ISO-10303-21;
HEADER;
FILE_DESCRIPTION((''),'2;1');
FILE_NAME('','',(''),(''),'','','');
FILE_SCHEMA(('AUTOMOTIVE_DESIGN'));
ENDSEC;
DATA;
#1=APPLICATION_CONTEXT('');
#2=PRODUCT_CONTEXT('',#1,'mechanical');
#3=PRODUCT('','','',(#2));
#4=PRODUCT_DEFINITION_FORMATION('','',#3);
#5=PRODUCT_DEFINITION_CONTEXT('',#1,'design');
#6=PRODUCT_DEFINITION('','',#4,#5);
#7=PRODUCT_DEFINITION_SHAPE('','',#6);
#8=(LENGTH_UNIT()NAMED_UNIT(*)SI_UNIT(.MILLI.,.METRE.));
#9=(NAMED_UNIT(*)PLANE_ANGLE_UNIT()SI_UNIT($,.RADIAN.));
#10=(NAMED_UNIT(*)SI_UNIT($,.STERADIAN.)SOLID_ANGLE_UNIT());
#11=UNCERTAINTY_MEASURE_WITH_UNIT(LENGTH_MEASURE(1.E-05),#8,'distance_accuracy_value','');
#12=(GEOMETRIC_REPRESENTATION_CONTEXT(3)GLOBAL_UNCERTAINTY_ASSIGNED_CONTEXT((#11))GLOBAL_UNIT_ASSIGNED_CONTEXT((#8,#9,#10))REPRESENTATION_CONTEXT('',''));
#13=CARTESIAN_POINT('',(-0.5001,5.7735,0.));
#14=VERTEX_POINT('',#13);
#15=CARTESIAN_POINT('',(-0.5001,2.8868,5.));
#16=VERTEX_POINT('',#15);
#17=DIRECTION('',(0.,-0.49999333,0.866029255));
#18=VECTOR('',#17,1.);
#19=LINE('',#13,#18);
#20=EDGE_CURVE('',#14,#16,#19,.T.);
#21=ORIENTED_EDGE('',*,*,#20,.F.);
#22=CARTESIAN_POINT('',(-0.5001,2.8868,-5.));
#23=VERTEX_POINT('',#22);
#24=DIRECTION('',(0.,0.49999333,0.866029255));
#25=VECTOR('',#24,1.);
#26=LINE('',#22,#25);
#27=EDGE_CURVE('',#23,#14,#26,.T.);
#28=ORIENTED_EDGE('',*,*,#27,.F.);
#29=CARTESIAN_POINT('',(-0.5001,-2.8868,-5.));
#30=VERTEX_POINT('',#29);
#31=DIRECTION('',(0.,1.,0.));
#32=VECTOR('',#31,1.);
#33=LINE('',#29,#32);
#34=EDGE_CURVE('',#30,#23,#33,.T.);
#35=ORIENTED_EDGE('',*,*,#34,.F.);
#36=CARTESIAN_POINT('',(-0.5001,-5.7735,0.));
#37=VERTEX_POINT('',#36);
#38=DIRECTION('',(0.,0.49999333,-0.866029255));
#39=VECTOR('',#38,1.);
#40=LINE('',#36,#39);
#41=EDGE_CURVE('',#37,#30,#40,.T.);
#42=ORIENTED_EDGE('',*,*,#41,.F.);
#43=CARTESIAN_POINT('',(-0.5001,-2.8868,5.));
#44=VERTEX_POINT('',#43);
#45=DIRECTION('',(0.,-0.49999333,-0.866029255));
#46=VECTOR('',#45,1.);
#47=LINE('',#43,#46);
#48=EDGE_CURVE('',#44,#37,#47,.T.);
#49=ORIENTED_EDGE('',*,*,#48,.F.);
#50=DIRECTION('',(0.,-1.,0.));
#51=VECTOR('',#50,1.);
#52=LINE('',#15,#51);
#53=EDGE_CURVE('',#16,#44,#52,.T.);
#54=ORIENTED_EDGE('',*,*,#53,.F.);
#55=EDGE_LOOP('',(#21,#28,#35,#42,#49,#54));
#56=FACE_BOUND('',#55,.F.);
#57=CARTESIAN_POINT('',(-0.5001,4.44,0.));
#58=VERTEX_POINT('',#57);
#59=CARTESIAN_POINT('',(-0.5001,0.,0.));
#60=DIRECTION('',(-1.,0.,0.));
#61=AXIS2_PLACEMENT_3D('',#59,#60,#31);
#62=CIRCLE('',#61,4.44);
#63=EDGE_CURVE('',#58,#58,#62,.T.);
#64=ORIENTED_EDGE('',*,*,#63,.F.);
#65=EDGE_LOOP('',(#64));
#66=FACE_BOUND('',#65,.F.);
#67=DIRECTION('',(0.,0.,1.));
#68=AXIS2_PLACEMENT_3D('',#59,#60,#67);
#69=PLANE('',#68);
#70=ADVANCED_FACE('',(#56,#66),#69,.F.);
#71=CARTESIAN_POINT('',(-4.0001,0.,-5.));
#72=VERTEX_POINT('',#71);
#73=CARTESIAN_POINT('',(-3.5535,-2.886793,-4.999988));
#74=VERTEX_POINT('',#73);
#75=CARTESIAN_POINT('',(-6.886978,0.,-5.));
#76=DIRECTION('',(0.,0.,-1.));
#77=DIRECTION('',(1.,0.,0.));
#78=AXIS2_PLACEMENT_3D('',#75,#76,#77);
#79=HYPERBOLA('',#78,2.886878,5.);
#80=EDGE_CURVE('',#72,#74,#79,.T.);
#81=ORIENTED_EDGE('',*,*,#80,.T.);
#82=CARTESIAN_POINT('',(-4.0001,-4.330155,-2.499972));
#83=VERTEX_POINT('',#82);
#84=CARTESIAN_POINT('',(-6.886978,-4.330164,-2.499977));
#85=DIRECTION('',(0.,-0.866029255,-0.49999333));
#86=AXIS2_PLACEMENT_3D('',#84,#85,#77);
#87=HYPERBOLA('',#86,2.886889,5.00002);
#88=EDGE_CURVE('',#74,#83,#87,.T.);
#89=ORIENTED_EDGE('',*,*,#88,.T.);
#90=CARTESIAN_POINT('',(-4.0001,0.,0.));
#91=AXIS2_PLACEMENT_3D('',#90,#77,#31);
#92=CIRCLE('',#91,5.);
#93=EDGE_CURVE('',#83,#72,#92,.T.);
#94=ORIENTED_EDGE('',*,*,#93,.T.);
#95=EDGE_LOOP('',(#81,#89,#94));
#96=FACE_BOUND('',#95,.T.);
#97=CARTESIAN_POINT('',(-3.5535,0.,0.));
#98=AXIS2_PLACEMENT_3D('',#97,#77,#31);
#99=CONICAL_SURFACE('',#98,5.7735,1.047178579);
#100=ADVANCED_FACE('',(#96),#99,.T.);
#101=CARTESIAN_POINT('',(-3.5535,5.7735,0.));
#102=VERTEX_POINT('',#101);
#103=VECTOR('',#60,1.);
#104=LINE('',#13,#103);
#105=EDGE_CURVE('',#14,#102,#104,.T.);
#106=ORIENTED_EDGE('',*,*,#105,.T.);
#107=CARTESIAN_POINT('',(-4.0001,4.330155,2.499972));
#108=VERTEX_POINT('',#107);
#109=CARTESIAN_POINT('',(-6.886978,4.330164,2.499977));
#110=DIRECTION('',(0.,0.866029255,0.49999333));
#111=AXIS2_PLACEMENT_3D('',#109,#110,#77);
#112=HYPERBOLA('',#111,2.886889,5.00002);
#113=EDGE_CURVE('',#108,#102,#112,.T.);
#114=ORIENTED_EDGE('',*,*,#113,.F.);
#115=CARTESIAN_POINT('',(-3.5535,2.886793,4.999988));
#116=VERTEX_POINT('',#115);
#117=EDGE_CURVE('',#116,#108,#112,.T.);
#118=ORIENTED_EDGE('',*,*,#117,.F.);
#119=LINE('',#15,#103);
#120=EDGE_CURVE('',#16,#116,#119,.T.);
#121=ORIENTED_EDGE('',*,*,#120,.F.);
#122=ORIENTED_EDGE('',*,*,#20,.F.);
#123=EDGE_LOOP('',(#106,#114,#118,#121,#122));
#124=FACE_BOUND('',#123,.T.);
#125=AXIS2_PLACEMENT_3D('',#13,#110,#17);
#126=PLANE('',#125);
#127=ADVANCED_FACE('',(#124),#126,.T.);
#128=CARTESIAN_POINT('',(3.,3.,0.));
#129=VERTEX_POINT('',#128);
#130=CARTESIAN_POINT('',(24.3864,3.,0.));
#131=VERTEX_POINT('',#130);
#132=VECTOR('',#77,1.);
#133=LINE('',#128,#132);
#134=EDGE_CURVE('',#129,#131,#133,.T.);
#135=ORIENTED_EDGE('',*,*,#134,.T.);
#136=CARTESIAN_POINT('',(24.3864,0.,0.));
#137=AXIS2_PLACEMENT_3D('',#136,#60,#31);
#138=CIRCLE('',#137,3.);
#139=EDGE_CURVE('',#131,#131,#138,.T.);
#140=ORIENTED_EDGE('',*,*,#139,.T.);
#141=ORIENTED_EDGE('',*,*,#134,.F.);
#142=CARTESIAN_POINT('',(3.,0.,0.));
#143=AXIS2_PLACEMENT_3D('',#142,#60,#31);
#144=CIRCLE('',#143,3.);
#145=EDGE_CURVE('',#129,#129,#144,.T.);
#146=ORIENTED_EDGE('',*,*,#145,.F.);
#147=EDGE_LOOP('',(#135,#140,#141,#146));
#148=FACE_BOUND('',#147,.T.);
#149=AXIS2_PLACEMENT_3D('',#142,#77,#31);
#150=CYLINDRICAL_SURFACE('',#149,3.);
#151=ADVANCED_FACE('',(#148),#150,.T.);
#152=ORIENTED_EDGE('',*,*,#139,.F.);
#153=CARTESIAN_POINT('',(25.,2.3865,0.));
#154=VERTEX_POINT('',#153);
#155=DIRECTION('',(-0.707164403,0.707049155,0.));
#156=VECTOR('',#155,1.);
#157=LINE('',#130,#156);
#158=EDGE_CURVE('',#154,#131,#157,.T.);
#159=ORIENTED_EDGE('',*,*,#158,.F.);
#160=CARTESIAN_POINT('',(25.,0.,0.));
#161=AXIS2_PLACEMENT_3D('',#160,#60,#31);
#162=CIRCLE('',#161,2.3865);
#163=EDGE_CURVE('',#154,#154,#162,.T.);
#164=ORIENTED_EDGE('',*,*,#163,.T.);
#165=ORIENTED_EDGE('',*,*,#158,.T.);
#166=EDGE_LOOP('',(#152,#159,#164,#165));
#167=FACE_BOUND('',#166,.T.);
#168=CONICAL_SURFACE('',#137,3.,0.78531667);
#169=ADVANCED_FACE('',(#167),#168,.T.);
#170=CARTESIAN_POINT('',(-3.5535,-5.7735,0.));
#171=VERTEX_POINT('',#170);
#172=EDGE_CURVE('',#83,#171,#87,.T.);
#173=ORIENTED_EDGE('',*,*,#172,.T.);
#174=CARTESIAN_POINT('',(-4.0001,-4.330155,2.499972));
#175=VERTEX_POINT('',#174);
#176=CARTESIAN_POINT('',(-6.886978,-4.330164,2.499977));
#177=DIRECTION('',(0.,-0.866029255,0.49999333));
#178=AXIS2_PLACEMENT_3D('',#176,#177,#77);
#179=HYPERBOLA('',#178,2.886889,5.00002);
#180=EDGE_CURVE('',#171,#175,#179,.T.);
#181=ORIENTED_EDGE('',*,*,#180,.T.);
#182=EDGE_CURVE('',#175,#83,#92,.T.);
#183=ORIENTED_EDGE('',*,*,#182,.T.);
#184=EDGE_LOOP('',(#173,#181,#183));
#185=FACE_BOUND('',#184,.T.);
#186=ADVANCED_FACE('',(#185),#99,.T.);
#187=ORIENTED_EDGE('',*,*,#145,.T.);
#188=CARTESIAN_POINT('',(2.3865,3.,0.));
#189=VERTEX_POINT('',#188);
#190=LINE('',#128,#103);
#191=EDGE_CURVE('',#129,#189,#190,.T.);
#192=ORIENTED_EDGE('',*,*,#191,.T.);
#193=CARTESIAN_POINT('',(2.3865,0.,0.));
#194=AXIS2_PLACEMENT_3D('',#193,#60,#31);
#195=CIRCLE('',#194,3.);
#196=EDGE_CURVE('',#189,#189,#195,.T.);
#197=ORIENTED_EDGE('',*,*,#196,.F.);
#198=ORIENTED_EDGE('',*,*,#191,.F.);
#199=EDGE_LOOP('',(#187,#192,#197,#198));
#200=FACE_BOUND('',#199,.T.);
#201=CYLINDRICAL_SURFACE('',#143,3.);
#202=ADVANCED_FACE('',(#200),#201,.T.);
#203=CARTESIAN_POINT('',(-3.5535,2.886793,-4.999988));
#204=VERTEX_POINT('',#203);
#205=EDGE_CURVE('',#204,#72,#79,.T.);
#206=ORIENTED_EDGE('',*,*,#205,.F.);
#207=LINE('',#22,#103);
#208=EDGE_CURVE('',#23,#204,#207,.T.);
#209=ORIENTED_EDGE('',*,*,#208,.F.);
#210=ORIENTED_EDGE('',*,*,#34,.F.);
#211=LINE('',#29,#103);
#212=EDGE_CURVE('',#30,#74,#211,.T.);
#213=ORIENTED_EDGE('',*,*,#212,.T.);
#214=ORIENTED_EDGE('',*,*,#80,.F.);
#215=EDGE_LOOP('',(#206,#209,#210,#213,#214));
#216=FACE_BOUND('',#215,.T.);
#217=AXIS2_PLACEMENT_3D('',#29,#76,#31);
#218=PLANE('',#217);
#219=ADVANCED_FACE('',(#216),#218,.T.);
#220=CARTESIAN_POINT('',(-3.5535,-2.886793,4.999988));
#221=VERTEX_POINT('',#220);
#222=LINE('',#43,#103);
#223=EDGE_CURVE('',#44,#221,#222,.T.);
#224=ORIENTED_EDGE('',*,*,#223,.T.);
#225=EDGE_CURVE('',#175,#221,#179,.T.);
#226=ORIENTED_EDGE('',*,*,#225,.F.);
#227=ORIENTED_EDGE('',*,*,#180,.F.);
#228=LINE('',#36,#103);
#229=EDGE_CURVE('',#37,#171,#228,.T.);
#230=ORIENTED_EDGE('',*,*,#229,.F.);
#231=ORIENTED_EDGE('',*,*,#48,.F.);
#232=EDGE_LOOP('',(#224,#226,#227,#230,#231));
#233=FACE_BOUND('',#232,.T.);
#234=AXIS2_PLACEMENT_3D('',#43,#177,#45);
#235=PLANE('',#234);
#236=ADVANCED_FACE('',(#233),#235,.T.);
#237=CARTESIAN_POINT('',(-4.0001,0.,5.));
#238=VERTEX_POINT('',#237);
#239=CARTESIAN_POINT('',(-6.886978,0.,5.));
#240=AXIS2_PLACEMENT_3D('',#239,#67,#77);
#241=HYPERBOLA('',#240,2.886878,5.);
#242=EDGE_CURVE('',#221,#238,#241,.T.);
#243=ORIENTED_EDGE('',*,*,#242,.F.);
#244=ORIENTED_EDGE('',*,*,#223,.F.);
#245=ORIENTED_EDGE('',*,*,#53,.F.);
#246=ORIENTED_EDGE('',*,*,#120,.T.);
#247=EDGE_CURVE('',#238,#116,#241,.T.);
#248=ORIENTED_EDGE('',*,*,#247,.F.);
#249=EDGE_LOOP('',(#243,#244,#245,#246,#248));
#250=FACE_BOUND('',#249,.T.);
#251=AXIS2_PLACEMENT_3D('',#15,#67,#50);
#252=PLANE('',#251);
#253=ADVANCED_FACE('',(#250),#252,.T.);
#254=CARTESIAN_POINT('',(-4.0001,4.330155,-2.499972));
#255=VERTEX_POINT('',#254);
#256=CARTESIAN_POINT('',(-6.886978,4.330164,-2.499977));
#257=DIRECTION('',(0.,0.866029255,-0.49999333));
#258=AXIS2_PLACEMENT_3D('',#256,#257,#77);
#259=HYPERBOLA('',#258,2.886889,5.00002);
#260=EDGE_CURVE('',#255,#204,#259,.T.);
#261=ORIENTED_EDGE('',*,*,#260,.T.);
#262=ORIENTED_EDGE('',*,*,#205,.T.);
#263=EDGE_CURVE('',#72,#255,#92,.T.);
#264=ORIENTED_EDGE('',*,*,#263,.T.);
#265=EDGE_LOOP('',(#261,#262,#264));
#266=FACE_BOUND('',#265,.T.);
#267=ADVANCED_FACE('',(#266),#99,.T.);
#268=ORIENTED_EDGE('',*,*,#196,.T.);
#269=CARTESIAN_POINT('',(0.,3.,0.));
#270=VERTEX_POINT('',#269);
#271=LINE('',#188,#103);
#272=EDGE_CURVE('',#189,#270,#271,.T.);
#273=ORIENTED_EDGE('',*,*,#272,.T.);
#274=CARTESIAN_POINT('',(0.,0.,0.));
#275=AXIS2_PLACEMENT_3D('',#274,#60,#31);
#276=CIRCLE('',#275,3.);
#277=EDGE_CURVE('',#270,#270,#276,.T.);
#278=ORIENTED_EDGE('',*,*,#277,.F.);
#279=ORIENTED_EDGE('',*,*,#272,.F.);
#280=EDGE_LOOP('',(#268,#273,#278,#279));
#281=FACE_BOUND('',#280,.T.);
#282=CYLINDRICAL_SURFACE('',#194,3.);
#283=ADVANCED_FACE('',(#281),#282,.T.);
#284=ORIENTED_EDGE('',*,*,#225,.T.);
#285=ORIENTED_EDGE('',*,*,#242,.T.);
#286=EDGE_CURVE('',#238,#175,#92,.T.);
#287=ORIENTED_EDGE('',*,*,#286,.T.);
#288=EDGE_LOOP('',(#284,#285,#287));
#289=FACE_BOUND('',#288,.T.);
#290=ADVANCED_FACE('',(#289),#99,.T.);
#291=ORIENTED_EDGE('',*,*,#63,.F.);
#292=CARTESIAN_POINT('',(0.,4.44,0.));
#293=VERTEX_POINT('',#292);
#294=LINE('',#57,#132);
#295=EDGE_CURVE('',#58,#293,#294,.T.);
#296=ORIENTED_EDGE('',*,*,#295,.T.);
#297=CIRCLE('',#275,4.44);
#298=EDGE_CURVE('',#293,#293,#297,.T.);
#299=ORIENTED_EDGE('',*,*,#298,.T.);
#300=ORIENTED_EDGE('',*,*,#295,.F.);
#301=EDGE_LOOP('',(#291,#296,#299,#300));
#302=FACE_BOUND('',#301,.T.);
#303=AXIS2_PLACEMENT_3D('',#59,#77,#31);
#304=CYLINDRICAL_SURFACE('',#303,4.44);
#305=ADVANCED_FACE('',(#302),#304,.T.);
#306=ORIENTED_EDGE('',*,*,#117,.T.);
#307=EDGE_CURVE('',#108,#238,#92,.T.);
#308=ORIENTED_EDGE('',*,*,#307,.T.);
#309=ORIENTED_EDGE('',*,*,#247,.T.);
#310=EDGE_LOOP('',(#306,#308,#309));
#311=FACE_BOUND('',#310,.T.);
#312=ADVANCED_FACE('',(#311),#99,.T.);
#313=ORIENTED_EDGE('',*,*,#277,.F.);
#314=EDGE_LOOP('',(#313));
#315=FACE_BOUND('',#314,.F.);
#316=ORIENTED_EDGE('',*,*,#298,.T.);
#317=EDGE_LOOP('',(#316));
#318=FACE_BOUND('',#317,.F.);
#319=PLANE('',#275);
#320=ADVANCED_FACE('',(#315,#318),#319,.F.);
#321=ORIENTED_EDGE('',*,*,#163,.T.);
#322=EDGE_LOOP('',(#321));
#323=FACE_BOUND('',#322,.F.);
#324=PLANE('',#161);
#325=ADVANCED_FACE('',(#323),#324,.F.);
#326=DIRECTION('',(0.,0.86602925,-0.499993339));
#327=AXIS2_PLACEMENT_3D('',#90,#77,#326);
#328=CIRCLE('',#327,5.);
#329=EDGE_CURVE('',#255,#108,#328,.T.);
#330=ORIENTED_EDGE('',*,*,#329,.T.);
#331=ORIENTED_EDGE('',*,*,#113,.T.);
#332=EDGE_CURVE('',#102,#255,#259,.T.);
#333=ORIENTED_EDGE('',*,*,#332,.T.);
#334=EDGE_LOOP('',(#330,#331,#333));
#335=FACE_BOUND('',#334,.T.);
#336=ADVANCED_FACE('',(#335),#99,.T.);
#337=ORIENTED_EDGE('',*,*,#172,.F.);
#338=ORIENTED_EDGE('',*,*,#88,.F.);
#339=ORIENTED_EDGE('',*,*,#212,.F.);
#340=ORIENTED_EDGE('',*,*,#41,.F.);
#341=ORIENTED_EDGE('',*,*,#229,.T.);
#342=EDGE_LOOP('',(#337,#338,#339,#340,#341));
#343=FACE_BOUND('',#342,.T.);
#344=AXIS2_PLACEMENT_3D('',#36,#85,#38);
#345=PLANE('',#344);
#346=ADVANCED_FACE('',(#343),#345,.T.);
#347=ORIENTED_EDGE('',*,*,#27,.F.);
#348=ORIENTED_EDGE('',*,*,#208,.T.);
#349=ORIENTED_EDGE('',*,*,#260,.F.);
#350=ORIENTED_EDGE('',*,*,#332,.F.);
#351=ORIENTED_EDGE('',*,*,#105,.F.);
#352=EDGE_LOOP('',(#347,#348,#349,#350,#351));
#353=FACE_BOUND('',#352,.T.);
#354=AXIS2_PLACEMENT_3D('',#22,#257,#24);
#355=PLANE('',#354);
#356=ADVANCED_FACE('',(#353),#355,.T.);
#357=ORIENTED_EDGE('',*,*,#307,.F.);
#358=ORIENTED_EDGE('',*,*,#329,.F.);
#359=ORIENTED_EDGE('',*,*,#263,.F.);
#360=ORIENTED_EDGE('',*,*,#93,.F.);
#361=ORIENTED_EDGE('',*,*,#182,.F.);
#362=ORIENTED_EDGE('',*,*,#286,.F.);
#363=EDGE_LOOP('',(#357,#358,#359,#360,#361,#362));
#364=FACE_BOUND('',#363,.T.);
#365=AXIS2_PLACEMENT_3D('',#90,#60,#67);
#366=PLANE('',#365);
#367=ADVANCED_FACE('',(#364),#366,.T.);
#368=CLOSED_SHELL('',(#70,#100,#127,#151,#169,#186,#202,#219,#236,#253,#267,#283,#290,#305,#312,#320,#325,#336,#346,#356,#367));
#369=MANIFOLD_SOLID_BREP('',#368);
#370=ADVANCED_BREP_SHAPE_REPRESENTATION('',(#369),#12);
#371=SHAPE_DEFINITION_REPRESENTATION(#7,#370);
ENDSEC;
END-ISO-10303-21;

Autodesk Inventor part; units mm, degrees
ref_plane "YZ Plane" through (0, 0, 0) normal (1, 0, 0) x (0, 1, 0)
ref_plane "XZ Plane" through (0, 0, 0) normal (0, 1, 0) x (-1, 0, 0)
sketch "Sketch1" plane through (0, 0, 0) normal (0, 0, 1) x (1, 0, 0)
  line L0 (0, 4.44) -> (0, 3)
  line L1 (3, 3) -> (25, 3)
  line L2 (25, 3) -> (25, 0)
  line L3 (25, 0) -> (-0.5001, 0)
  line L4 (-5.6001, 0) -> (30.1, 0) projected
  line L5 (-0.5001, 0) -> (-0.5001, 4.44)
  line L6 (-0.5001, 4.44) -> (0, 4.44)
  line L7 (3, 3) -> (2.3865, 3)
  line L8 (2.3865, 3) -> (0, 3)
  line L9 (0, -0.888) -> (0, 5.328) projected
  dimension "d0" = 25
  dimension "d1" = 22
  dimension "d2" = 6
  dimension "d9" = 0.5001
  dimension "d10" = 8.88
  dimension "d13" = 0.6136
  dimension "d14" = 6
revolve "Body" add sketch "Sketch1" angle 360 about axis through (25, 0, 0) along (-1, 0, 0)
sketch "Sketch2" plane through (-0.5001, 0, 0) normal (-1, 0, 0) x (0, 0, 1)
  line L0 (0, 5.7735) -> (5, 2.8868)
  line L1 (5, 2.8868) -> (5, -2.8868)
  line L2 (5, -2.8868) -> (0, -5.7735)
  line L3 (0, -5.7735) -> (-5, -2.8868)
  line L4 (-5, -2.8868) -> (-5, 2.8868)
  line L5 (-5, 2.8868) -> (0, 5.7735)
  point P0 (0, 0)
  point P1 (0, 0)
  dimension "d11" = 10
extrude "Head" add sketch "Sketch2" along normal blind 3.5
sketch "Sketch4" plane through (0, 0, 0) normal (0, 0, 1) x (1, 0, 0)
  line L0 (-4.0001, 5) -> (-4.0001, 5.7735)
  line L1 (-4.0001, 5.7735) -> (-3.5535, 5.7735)
  line L2 (-3.5535, 5.7735) -> (-4.0001, 5)
  line L3 (-4.7001, 0) -> (0.1999, 0) projected
  line L4 (-0.5001, 5.7735) -> (-4.0001, 5.7735) projected
  line L5 (-4.0001, 2.8868) -> (-4.0001, 5.7735) projected
  dimension "d5" = 30
  dimension "d19" = 10
revolve "Chamfer1" cut sketch "Sketch4" angle 360 about axis through (-10, 0, 0) along (1, 0, 0)
thread "Thread" size "M6x1" class "6g" standard "ISO Metric profile" length 22
chamfer "Chamfer2" distance 0.6135 distance2 0.6136 1 edges at (25, -3, 0) measured on face at (25, 0.7776, 0.4238)
ref_plane "Work Plane1" through (1.525, 0, 0) normal (0, 0, 1) x (1, 0, 0)
equation "\"d11\" = SW"
equation "\"d3\" = KOH - SD"
equation "\"d15\" = GEL"
equation "\"d6\" = -0.5 * SPD + 0.5 * GD"
equation "\"d0\" = NLG"
equation "\"d1\" = GEL"
equation "\"d2\" = GD"
equation "\"d10\" = SD2"
equation "\"d14\" = BDM"
equation "\"d5\" = ANG1"
equation "\"d19\" = SW0"
equation "\"NLG\" = 25"
equation "\"GD\" = NND"
equation "\"BDM\" = NND"
equation "\"KOH\" = 4"
equation "\"GEL\" = 22"
equation "\"SW\" = 10"
equation "\"SW0\" = SW"
equation "\"SPD\" = NND - 1.2269 * PTC"
equation "\"SD2\" = 8.88"
equation "\"SD\" = 0.5"
equation "\"ANG1\" = 30deg"
equation "\"GAL\" = 0.61345 * PTC"
equation "\"GUL\" = 0.61345 * PTC"
equation "\"RR\" = 0.25"
equation "\"GD1\" = THREADDIA - 1.2269 * PTC"
equation "\"THREADDIA\" = 6"
equation "\"SDH\" = SD2"
equation "\"SDHG\" = 3"
equation "\"TOA\" = 30deg"
equation "\"PTC\" = 1"
equation "\"NND\" = 6"
equation "\"E0\" = 11.55"
properties part number "ISO 4017 - M6 x 25" material "Stainless Steel, 440C"
